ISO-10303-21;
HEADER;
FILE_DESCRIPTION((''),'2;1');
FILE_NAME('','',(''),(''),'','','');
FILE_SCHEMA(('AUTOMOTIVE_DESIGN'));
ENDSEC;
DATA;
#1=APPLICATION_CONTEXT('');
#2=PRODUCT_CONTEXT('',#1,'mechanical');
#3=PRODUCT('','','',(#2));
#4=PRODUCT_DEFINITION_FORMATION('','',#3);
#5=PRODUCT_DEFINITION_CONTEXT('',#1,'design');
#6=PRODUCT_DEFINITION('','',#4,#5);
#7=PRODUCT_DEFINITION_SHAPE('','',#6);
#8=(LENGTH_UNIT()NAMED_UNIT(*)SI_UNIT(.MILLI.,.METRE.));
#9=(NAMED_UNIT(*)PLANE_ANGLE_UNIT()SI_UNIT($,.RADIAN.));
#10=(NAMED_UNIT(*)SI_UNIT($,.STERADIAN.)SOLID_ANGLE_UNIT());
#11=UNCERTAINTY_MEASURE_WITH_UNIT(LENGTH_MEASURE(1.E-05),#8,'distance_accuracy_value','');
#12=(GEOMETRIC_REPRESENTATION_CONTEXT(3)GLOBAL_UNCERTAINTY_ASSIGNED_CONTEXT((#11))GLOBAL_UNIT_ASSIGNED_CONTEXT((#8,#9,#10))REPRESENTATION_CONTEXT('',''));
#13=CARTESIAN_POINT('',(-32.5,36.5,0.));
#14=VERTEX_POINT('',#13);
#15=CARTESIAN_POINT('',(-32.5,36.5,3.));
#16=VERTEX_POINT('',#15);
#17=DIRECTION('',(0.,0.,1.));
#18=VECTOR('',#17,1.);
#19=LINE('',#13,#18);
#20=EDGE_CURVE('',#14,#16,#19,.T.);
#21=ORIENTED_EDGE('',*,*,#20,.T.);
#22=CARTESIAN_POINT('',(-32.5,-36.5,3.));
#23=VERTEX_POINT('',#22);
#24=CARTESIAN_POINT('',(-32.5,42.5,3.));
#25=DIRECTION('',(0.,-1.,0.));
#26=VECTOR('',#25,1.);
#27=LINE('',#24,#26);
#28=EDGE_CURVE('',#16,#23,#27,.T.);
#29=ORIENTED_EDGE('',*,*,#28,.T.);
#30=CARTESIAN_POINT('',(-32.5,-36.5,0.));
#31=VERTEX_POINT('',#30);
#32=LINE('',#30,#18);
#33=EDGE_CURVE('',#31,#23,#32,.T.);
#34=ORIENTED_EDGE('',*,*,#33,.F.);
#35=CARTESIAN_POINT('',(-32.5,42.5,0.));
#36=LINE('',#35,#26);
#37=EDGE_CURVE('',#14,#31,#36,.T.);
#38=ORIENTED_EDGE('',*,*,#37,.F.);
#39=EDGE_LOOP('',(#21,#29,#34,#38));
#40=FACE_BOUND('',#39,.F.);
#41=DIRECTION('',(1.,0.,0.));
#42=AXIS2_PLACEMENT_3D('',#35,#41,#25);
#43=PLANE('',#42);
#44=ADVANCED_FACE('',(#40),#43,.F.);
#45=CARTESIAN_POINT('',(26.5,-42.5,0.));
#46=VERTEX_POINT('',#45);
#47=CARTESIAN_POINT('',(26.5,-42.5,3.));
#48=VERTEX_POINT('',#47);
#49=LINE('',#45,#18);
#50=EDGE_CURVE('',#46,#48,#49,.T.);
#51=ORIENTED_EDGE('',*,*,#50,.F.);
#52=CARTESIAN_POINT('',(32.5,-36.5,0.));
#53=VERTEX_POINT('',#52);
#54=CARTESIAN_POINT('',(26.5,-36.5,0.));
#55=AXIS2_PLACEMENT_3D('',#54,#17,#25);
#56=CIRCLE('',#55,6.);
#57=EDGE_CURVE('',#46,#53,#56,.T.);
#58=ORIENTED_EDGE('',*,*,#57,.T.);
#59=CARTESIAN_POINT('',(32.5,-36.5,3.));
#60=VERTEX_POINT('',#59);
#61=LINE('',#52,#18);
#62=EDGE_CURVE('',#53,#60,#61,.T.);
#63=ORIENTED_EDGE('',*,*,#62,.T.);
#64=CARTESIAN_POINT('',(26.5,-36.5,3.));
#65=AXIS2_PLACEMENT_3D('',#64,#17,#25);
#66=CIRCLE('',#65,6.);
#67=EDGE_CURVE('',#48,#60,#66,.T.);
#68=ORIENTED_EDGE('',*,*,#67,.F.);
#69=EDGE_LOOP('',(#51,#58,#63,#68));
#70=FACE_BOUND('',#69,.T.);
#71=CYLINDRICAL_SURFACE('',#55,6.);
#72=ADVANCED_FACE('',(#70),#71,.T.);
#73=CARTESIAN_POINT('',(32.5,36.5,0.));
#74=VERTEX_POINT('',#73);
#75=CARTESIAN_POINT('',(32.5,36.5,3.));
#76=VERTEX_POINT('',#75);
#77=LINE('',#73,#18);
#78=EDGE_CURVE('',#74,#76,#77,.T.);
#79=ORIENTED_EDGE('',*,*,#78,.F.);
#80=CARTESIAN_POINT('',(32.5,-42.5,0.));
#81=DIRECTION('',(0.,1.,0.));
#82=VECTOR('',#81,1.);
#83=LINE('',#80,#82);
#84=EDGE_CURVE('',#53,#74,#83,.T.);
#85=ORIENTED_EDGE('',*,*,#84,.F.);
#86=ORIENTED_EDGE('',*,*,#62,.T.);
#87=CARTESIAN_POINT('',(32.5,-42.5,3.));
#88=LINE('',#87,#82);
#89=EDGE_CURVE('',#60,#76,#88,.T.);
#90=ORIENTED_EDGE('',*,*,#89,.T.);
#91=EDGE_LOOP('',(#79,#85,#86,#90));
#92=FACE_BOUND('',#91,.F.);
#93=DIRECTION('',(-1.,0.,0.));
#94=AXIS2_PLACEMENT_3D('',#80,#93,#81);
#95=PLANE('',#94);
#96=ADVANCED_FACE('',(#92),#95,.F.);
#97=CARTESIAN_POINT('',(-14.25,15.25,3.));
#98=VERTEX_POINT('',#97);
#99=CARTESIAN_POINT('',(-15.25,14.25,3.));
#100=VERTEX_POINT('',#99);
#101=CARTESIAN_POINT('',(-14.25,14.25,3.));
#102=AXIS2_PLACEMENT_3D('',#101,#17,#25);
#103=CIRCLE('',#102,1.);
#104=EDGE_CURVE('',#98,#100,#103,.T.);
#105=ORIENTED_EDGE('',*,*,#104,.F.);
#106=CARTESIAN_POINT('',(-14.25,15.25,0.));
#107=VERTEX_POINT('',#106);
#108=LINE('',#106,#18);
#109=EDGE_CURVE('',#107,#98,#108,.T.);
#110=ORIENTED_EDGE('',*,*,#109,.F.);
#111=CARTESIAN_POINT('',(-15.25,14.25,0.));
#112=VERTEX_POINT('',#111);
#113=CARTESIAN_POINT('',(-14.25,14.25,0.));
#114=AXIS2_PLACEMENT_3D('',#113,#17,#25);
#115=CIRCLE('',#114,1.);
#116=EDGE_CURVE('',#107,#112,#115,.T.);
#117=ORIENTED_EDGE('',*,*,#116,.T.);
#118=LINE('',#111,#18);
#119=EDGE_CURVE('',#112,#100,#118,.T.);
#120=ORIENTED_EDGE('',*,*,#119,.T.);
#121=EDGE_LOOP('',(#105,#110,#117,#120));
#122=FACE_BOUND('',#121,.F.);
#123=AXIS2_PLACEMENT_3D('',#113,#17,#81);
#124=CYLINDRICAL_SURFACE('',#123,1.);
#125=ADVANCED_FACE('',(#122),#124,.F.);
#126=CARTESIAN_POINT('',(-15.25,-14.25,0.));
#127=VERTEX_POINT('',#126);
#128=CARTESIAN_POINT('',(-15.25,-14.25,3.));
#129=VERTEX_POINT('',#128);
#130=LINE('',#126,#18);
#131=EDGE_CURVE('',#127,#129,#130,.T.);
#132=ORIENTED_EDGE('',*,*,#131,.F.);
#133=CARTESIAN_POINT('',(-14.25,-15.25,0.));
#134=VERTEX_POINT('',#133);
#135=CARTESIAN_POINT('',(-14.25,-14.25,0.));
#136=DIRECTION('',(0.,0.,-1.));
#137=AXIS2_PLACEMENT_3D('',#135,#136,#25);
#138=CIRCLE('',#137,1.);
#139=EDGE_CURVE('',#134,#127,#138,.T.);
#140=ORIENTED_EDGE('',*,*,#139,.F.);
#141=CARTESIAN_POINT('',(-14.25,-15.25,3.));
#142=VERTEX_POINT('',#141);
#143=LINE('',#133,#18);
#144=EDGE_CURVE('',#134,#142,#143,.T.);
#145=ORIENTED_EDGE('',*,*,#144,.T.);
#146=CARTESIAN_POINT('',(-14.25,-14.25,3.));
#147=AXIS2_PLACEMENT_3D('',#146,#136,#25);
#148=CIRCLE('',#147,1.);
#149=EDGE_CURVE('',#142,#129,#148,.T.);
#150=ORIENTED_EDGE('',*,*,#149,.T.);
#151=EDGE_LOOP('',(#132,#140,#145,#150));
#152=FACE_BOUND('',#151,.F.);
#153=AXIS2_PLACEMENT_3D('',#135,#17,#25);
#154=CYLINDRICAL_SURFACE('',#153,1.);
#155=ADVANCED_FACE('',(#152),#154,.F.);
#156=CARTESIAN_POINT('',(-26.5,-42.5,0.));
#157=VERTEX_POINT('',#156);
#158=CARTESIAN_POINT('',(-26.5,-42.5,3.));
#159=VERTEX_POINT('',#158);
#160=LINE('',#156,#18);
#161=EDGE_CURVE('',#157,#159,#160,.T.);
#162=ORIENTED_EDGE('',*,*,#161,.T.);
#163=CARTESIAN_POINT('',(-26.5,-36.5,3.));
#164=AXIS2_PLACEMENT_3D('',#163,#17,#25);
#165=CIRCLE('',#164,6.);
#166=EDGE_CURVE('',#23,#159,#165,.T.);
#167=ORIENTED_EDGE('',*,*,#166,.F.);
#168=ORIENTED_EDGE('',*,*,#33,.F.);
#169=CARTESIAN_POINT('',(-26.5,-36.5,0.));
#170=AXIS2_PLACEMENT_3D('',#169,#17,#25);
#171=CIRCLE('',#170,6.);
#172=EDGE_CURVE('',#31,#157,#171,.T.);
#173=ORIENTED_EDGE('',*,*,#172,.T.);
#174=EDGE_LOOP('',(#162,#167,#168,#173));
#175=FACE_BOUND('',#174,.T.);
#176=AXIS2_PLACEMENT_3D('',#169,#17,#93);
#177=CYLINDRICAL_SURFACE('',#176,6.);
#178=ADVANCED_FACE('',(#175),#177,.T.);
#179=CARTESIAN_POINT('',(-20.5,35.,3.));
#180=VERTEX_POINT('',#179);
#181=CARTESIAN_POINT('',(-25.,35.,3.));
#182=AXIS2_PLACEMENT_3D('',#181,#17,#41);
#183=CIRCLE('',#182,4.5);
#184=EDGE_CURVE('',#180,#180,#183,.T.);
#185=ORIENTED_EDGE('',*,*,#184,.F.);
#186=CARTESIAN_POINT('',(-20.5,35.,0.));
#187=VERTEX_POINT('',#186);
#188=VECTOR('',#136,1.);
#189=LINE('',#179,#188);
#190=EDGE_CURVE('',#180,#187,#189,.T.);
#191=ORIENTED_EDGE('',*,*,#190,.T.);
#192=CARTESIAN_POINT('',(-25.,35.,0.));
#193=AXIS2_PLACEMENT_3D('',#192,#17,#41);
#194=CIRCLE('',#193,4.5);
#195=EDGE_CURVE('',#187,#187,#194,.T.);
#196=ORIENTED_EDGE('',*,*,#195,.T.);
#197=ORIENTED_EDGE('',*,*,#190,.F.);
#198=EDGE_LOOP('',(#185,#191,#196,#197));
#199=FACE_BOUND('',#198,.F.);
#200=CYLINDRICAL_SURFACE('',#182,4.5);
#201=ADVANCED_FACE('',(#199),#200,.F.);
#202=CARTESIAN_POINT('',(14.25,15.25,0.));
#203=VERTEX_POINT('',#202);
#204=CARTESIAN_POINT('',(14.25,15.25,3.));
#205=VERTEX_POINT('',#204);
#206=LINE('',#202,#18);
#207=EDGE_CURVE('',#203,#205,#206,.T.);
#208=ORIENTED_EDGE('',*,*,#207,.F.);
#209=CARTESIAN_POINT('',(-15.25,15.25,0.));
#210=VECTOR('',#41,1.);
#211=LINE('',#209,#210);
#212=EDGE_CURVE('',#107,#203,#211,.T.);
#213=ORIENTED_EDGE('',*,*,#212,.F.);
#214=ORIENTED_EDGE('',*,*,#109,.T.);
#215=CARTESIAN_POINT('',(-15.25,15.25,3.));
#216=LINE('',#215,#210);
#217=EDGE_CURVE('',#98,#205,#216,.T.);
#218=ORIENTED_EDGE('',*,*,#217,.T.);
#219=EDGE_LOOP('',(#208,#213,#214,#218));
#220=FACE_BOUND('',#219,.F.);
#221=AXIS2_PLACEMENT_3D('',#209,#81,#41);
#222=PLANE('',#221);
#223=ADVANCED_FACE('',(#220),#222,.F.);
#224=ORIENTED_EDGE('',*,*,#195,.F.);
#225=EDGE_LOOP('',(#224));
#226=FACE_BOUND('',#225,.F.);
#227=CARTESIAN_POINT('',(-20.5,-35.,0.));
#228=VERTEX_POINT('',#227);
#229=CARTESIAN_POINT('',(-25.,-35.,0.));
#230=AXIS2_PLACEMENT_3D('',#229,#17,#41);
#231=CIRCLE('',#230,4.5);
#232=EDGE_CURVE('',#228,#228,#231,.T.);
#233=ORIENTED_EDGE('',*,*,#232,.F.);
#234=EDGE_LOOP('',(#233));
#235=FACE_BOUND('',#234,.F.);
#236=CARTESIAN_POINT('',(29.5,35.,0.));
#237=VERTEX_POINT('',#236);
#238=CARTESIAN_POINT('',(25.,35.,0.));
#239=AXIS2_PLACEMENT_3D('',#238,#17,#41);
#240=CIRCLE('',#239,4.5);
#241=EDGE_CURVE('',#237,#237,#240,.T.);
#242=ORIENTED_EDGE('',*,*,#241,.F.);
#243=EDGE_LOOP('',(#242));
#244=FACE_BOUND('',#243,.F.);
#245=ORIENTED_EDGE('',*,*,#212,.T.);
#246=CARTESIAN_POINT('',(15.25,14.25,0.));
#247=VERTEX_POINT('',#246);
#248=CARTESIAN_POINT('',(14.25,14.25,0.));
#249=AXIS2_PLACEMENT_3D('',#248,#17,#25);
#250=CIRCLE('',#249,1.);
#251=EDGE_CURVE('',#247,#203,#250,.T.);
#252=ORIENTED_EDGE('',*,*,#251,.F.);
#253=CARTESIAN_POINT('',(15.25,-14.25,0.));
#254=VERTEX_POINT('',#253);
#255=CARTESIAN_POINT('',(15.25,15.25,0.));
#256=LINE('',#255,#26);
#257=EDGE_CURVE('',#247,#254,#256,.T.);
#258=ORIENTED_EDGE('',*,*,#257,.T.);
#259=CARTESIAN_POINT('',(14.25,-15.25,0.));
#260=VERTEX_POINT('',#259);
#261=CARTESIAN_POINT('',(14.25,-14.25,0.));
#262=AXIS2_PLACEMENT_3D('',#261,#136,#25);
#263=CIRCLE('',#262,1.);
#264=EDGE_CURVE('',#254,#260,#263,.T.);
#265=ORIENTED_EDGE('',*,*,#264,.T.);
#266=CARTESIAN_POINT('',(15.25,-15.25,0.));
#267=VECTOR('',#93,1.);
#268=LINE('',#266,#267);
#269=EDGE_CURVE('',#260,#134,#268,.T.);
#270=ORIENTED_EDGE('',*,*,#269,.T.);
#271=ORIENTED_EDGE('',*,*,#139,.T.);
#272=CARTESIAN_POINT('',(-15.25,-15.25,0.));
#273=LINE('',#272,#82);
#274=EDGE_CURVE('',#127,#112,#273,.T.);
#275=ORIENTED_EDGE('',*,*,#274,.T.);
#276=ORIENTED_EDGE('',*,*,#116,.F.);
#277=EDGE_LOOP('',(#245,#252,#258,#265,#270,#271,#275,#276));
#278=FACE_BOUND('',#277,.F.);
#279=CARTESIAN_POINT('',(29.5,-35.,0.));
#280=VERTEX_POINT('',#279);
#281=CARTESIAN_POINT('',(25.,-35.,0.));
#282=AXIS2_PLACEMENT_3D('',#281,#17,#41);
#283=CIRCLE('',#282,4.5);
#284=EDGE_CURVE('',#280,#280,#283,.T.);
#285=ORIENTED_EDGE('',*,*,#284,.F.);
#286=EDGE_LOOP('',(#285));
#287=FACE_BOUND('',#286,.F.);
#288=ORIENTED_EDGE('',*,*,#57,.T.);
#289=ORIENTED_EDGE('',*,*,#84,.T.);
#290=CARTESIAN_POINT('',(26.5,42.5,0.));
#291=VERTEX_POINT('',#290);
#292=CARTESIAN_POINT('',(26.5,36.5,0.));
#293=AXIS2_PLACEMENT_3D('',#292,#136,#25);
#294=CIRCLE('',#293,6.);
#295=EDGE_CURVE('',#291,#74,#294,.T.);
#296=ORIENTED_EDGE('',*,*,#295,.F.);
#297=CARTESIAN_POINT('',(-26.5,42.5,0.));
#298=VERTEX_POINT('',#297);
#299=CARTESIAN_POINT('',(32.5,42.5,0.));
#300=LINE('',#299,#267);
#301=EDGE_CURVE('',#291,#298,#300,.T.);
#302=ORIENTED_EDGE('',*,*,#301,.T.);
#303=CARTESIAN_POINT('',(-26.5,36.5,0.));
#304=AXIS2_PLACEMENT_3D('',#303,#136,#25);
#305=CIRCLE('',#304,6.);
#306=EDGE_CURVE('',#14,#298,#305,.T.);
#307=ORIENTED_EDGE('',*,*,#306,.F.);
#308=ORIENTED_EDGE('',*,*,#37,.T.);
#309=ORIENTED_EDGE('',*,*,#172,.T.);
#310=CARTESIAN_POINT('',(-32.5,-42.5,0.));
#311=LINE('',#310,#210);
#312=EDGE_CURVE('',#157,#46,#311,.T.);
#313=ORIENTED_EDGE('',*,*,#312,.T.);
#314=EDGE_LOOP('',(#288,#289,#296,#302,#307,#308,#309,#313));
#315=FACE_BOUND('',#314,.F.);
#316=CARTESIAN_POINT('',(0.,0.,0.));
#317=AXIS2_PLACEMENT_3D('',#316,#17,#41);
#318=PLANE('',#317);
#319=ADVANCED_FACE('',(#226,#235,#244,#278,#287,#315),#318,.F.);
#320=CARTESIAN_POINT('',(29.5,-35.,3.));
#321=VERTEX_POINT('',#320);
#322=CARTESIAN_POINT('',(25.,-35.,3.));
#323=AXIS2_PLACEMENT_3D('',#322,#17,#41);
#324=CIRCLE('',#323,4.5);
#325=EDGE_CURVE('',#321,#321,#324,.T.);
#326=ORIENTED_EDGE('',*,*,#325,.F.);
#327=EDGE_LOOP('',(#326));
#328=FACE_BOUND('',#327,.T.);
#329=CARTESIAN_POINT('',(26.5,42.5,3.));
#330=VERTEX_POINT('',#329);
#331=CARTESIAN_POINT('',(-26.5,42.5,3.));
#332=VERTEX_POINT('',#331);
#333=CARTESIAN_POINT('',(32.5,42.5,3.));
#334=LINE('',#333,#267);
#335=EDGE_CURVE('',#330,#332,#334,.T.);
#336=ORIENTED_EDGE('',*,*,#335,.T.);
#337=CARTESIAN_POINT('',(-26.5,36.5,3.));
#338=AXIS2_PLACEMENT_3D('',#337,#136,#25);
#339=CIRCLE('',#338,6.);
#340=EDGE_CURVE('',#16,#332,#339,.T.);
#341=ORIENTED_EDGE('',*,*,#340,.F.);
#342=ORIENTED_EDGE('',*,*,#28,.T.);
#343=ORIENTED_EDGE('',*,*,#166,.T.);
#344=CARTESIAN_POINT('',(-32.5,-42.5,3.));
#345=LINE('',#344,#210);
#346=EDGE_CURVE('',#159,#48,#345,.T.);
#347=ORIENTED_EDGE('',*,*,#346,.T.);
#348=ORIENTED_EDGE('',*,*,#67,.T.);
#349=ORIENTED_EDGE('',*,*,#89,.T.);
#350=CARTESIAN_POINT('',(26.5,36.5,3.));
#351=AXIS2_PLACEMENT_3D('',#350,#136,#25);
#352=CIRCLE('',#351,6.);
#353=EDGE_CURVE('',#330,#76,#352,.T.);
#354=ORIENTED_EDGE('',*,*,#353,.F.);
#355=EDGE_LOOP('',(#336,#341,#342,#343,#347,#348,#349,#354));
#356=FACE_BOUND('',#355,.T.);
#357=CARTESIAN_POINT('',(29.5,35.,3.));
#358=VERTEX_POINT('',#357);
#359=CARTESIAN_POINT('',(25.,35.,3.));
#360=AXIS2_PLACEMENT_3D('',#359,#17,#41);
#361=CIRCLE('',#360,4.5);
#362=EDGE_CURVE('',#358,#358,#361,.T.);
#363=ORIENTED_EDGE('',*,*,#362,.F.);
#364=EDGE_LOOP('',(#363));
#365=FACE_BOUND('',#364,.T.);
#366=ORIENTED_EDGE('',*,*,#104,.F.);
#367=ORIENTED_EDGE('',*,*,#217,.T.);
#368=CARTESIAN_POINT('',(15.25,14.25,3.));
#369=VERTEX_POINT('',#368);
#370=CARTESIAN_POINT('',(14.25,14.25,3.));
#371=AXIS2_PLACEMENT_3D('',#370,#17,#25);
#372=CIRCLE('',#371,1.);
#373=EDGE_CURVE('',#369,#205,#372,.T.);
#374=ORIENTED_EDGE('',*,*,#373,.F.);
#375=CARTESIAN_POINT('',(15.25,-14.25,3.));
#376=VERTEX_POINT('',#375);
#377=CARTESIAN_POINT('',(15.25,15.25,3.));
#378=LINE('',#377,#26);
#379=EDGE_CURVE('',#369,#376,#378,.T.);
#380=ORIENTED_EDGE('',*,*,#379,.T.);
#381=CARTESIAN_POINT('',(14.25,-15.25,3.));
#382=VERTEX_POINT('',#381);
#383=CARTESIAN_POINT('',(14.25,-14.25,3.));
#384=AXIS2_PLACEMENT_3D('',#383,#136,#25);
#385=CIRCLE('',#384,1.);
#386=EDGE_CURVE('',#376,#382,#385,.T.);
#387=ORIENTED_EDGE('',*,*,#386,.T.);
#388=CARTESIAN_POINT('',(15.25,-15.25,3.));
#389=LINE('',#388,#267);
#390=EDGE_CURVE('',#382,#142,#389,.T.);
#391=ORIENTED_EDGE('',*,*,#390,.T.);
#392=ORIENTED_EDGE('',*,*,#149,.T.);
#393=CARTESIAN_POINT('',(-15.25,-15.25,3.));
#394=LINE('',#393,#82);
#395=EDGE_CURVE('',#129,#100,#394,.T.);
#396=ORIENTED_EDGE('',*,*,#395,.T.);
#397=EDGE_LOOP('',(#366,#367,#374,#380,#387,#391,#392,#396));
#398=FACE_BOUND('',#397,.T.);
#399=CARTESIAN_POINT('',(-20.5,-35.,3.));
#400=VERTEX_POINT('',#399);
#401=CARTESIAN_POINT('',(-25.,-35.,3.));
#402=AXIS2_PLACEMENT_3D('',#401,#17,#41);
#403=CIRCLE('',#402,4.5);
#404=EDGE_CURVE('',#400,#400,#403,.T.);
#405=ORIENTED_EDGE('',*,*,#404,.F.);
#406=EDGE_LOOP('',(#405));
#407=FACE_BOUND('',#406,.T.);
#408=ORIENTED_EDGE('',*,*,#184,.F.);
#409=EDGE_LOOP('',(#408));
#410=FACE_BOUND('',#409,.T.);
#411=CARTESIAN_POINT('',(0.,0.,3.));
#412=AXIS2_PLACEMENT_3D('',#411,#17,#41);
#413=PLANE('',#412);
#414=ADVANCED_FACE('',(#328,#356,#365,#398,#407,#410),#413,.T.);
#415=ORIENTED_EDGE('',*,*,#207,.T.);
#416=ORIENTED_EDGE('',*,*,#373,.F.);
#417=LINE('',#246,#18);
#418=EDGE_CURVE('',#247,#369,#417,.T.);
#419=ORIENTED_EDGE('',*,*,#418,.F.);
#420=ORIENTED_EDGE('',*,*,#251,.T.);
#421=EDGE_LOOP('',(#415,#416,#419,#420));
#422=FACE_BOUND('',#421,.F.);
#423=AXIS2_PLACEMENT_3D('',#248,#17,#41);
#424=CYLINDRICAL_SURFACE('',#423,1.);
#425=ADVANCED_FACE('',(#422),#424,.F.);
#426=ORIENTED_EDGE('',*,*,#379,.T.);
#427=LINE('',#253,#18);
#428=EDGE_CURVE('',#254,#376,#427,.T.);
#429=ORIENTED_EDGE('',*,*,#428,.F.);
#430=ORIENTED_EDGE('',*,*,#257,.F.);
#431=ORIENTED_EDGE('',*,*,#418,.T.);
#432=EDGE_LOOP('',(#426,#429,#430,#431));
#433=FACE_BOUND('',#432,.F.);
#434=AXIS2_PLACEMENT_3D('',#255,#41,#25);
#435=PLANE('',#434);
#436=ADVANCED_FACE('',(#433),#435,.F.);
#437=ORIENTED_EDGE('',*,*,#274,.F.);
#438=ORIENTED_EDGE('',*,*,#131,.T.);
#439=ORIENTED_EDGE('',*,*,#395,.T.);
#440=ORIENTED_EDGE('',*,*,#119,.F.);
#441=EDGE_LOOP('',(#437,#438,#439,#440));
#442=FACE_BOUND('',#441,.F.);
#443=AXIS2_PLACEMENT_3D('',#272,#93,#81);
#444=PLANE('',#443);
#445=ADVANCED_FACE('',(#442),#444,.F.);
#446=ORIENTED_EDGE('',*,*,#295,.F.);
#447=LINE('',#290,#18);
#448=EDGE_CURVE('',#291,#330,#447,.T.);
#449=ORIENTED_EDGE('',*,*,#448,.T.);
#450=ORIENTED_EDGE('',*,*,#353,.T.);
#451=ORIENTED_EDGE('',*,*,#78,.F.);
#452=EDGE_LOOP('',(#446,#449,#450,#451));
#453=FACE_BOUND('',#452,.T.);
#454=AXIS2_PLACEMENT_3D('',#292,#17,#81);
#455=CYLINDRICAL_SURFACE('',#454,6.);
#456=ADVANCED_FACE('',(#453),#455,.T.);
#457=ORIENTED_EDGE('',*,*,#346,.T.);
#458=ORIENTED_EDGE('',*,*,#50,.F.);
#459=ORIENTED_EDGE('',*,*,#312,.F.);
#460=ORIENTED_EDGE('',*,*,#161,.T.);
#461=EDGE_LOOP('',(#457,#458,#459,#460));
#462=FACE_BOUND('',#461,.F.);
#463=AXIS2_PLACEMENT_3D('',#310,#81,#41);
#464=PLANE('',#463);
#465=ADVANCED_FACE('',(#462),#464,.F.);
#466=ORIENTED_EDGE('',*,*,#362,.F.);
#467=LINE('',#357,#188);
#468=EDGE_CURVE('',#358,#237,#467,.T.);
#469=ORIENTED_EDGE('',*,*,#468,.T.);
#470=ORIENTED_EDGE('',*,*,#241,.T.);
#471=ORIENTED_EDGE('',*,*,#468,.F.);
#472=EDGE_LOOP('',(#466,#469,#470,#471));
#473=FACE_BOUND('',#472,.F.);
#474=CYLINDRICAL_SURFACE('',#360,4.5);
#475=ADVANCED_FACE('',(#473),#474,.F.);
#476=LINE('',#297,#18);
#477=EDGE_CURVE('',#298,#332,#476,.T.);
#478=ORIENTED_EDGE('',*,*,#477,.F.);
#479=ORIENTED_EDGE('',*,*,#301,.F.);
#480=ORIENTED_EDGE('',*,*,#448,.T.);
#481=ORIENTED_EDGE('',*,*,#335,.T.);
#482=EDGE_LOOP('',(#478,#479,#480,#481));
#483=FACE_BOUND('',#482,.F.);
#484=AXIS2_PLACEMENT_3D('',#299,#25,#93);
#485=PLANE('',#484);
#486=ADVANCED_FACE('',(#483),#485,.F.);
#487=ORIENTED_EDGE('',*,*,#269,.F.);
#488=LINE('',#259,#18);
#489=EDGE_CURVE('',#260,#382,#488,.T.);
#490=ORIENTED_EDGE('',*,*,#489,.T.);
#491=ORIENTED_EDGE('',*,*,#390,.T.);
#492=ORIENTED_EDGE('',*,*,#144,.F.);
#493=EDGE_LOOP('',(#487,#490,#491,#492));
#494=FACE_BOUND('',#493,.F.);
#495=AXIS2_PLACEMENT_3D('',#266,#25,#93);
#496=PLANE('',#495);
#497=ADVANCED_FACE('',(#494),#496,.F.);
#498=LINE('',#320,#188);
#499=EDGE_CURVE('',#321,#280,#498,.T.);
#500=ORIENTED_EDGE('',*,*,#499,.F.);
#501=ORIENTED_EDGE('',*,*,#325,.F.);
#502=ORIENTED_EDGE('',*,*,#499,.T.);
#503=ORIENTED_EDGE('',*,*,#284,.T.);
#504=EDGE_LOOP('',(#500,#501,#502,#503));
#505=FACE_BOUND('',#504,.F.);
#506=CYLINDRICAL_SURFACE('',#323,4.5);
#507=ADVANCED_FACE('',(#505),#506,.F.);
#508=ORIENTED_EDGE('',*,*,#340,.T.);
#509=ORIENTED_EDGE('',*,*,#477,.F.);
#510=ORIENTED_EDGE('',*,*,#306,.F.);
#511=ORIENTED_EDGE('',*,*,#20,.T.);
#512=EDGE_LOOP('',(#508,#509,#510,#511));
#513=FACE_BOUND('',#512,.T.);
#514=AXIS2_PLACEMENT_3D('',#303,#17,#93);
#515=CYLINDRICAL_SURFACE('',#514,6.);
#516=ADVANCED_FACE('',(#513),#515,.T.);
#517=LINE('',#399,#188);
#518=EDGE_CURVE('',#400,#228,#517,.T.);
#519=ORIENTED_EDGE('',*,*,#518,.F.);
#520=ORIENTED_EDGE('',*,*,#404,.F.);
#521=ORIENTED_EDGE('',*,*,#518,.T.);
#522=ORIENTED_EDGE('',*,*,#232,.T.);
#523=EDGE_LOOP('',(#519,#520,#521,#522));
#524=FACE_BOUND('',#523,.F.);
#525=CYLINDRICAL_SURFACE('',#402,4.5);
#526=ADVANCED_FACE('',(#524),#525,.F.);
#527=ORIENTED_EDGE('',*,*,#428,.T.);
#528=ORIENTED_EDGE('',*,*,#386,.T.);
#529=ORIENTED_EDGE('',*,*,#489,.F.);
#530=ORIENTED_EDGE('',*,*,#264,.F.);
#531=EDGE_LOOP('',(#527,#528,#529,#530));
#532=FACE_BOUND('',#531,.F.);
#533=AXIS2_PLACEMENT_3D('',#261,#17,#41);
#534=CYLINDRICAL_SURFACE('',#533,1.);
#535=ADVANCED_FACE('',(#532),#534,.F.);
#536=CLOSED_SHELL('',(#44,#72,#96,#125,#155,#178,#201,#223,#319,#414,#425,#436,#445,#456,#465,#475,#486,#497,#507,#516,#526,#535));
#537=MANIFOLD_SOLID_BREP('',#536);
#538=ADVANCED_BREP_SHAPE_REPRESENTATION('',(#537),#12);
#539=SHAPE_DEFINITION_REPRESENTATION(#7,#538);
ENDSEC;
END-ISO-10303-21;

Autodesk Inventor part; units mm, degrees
ref_plane "YZ Plane" through (0, 0, 0) normal (1, 0, 0) x (0, 1, 0)
ref_plane "XZ Plane" through (0, 0, 0) normal (0, 1, 0) x (-1, 0, 0)
ref_plane "XY Plane" through (0, 0, 0) normal (0, 0, 1) x (1, 0, 0)
sketch "Sketch1" plane through (0, 0, 0) normal (0, 0, 1) x (1, 0, 0)
  line L0 (-32.5, -42.5) -> (32.5, -42.5)
  line L1 (32.5, -42.5) -> (32.5, 42.5)
  line L2 (32.5, 42.5) -> (-32.5, 42.5)
  line L3 (-32.5, 42.5) -> (-32.5, -42.5)
  line L4 (-32.5, -42.5) -> (32.5, 42.5) construction
  line L5 (32.5, -42.5) -> (-32.5, 42.5) construction
  line L6 (15.25, -15.25) -> (-15.25, -15.25)
  line L7 (-15.25, -15.25) -> (-15.25, 15.25)
  line L8 (-15.25, 15.25) -> (15.25, 15.25)
  line L9 (15.25, 15.25) -> (15.25, -15.25)
  line L10 (15.25, -15.25) -> (-15.25, 15.25) construction
  line L11 (-15.25, -15.25) -> (15.25, 15.25) construction
  point P0 (0, 0)
  dimension "d154" = 65
  dimension "d155" = 85
  dimension "d172" = 30.5
extrude "Plate5" add sketch "Sketch1" along normal blind 3
sketch "Sketch9" plane through (0, 0, 3) normal (0, 0, 1) x (1, 0, 0)
  circle A0 centre (25, -35) radius 4.5
  line L0 (25, 35) -> (-25, 35) construction
  line L1 (-25, 35) -> (-25, -35) construction
  line L2 (-25, -35) -> (25, -35) construction
  line L3 (25, -35) -> (25, 35) construction
  line L4 (25, 35) -> (-25, -35) construction
  line L5 (-25, 35) -> (25, -35) construction
  circle A1 centre (-25, -35) radius 4.5
  circle A2 centre (25, 35) radius 4.5
  circle A3 centre (-25, 35) radius 4.5
  point P0 (0, 0)
  dimension "d173" = 70
  dimension "d174" = 9
  dimension "d175" = 50
extrude "Cut2" cut sketch "Sketch9" against normal blind 3
fillet "Corner Round1" radius 6 4 edges at (32.5, 42.5, 1.5) (-32.5, 42.5, 1.5) (-32.5, -42.5, 1.5) (32.5, -42.5, 1.5)
fillet "Corner Round2" radius 1 4 edges at (-15.25, 15.25, 1.5) (-15.25, -15.25, 1.5) (15.25, -15.25, 1.5) (15.25, 15.25, 1.5)
properties part number "APN 760 FDS 1200 FLANGE 3" material "Stainless Steel"
